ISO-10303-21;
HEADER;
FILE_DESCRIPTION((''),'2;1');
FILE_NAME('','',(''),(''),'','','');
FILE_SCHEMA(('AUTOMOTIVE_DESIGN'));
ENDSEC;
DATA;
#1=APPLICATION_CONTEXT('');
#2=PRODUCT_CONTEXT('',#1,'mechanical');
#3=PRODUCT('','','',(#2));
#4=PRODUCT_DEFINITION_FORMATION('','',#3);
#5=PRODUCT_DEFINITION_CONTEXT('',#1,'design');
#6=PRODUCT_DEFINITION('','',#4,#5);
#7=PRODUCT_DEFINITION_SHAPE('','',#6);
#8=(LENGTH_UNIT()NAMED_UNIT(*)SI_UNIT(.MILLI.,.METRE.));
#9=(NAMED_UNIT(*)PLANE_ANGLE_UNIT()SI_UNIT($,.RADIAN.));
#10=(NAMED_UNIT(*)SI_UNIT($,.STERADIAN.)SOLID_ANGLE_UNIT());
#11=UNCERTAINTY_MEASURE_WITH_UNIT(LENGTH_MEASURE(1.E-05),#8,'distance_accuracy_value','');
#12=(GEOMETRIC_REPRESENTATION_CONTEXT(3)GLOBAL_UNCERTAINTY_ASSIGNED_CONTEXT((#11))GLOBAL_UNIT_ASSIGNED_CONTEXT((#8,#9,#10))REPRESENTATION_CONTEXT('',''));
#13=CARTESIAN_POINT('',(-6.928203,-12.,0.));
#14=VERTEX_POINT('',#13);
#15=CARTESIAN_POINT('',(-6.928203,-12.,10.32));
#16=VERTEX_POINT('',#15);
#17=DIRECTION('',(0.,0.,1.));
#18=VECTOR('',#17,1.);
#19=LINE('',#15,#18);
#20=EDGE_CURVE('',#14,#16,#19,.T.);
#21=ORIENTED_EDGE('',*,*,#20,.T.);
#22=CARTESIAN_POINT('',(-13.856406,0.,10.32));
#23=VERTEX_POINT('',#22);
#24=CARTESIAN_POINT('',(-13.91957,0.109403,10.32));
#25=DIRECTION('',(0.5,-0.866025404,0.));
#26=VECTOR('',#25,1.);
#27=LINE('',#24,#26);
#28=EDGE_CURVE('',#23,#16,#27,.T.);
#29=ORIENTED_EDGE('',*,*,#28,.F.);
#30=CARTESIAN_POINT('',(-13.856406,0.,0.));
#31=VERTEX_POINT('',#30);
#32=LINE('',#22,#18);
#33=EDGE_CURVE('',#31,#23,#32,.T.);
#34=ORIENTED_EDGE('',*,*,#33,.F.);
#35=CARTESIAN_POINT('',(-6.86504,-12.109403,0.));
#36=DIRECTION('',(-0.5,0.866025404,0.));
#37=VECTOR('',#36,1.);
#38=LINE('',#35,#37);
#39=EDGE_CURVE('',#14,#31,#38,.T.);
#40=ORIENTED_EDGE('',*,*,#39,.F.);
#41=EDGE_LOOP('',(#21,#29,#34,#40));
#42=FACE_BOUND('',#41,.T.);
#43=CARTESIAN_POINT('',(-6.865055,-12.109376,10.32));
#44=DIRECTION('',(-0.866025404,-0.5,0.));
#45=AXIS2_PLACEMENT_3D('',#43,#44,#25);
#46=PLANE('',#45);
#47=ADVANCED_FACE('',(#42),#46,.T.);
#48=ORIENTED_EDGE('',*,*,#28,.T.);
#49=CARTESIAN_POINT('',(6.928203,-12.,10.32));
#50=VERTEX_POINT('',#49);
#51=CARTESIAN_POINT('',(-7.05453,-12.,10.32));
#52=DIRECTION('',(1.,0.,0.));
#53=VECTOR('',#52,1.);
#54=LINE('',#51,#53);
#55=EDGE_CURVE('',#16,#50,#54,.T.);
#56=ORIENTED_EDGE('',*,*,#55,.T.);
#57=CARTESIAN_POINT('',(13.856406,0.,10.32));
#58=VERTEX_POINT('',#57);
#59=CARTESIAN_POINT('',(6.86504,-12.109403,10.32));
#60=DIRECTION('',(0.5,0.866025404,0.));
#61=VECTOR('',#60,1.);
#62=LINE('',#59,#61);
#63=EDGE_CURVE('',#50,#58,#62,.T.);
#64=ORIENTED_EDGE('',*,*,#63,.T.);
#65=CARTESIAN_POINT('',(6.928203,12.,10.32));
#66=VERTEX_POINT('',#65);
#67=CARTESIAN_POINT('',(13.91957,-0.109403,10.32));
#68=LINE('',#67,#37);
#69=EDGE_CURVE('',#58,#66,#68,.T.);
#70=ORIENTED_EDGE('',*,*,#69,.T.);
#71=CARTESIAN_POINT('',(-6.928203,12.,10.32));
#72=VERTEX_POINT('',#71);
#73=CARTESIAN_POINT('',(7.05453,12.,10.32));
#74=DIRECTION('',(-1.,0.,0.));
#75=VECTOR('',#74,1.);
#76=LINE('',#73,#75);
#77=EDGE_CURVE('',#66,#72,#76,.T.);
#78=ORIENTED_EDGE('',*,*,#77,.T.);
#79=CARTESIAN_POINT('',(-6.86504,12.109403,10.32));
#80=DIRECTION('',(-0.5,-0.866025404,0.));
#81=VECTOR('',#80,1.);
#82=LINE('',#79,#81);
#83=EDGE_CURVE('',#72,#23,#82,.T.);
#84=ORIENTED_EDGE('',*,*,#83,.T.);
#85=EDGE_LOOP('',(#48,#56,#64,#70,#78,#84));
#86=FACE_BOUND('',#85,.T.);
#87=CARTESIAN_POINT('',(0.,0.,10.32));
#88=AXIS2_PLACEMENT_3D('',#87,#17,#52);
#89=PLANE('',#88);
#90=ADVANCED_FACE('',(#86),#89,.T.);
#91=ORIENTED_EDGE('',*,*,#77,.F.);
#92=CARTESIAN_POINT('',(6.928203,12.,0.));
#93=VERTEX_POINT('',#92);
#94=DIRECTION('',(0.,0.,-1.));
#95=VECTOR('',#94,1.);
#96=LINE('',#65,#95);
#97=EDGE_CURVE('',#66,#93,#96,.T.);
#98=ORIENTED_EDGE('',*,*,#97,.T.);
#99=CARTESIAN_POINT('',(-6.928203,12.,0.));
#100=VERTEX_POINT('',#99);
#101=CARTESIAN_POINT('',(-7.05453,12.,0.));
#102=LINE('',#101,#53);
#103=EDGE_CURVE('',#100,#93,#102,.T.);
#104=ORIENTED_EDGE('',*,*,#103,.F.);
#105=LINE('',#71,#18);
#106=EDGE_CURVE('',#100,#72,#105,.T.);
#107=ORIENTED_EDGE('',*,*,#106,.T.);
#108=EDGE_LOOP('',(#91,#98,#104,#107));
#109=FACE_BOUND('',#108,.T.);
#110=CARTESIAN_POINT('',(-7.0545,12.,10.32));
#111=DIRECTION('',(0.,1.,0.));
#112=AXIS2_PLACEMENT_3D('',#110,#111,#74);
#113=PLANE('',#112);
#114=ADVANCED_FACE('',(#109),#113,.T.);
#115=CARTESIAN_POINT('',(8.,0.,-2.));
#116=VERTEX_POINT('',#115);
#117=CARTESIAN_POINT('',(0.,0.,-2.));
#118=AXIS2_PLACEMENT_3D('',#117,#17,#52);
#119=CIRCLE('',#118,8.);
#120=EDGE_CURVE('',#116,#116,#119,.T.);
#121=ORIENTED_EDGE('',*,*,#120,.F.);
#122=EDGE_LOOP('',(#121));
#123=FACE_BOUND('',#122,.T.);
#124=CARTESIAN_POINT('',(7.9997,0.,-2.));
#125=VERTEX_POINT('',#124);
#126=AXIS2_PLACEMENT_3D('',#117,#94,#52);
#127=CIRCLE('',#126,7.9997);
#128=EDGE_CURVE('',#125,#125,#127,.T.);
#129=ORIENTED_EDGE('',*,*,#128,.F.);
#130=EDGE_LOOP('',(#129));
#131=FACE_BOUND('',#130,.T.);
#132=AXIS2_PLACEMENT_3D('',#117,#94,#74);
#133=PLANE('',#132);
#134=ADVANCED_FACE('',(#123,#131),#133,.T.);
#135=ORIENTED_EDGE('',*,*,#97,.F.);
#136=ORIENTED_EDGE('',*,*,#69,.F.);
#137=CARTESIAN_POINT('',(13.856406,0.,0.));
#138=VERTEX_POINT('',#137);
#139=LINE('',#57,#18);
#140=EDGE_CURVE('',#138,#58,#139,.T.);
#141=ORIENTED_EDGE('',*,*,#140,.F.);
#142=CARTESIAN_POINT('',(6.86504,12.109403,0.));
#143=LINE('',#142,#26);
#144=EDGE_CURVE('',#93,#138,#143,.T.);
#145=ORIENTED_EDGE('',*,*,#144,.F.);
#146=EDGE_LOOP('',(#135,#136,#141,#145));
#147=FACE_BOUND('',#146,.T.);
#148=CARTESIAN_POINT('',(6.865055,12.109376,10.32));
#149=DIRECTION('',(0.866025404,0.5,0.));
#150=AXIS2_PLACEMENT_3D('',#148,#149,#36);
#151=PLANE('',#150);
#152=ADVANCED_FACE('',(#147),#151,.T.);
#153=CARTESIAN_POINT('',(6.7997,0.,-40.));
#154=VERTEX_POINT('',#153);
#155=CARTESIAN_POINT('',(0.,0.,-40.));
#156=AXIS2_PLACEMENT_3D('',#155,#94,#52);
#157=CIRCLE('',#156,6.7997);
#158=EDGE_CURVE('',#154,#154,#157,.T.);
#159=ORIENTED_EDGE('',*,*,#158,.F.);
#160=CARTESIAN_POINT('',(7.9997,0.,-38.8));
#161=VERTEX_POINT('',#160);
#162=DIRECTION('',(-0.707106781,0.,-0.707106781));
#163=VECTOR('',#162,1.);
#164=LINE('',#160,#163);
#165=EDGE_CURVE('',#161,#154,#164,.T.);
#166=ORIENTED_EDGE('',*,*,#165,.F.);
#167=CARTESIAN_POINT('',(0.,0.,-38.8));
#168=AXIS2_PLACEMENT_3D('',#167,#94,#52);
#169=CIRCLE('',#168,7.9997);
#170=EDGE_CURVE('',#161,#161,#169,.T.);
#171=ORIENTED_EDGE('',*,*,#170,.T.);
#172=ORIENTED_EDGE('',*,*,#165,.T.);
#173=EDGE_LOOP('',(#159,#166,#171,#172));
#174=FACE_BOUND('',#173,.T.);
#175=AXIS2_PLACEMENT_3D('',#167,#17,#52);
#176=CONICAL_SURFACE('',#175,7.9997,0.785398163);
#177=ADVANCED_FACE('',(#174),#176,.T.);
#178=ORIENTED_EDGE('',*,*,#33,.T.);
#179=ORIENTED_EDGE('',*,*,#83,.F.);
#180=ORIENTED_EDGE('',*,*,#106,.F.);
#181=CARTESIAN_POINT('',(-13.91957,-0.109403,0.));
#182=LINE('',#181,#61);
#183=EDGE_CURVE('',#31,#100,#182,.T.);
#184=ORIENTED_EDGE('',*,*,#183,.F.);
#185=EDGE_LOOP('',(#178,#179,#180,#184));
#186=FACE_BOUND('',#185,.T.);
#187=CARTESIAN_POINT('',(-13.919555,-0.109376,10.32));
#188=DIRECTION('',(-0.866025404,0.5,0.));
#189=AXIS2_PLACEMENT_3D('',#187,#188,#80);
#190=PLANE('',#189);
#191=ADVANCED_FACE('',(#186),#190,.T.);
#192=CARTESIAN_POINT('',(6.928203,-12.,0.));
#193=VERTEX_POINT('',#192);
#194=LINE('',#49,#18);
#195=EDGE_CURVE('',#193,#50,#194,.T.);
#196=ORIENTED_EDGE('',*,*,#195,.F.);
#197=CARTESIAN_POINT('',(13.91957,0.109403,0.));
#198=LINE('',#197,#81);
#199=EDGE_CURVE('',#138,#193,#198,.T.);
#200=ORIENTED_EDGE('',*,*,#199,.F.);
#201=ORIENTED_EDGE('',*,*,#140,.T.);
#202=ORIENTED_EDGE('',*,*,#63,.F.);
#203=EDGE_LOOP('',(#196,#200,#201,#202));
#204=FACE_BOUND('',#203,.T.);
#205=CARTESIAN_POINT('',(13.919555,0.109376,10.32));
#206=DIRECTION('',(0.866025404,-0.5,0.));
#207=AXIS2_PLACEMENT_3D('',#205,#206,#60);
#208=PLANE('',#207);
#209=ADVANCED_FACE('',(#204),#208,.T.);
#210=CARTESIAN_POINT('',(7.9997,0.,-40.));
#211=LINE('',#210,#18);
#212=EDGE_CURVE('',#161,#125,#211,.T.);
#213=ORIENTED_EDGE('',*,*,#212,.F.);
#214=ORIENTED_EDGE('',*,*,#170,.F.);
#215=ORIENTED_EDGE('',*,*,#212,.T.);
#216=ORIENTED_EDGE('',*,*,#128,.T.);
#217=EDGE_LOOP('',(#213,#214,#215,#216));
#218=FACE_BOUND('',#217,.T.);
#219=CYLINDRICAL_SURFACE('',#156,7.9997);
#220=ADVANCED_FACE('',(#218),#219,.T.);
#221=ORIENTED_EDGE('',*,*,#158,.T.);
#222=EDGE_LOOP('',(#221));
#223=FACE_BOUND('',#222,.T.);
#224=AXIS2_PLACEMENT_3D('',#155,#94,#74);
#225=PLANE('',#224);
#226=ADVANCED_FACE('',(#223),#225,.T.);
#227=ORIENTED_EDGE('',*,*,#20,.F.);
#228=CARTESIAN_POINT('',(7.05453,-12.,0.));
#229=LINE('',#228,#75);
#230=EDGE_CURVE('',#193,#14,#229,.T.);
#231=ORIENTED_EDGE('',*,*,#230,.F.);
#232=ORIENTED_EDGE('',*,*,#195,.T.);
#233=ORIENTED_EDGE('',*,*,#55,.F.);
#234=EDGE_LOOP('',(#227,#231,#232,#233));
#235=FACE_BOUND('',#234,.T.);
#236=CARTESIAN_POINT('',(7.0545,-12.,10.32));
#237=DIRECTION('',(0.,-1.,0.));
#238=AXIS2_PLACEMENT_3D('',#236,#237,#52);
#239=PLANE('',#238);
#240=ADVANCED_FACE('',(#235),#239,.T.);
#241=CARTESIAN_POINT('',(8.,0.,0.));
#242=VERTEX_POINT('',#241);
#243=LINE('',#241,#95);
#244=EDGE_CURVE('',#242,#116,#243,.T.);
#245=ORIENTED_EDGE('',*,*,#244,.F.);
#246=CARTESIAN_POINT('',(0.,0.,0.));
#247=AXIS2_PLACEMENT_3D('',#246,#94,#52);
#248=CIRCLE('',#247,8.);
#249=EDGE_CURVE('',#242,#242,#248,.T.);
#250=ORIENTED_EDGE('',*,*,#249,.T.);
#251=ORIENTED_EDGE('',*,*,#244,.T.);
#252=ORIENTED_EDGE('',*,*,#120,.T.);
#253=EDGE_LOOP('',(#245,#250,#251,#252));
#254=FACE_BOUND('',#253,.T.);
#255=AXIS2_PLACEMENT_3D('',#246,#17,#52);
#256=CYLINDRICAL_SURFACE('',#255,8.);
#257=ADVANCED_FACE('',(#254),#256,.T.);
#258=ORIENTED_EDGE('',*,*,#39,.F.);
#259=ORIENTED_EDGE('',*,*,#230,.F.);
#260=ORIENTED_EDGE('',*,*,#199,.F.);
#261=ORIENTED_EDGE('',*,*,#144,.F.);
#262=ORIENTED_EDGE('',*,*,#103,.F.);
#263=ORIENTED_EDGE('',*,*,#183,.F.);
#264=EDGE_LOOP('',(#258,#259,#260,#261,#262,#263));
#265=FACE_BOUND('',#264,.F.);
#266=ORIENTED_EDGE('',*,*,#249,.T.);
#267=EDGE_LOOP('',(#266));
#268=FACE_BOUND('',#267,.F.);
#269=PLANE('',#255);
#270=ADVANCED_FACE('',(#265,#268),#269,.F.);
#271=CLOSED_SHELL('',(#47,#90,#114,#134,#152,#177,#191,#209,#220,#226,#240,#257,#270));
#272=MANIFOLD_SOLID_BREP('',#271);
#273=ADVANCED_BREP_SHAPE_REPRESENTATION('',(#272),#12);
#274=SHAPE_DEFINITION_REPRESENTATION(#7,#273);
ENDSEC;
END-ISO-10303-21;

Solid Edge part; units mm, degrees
sketch "Sketch1" plane through (0, 0, 0) normal (0, 0, 1) x (1, 0, 0)
  circle A0 centre (0, 0) radius 13.92
  dimension "D1" = 27.84
extrude "Protrusion1" add sketch "Sketch1" along normal blind 10.32
sketch "Sketch2" plane through (0, 0, 0) normal (0, 0, -1) x (1, 0, 0)
  circle A0 centre (0, 0) radius 8
extrude "Protrusion2" add sketch "Sketch2" along normal blind 40
sketch "Sketch3" plane through (0, 0, -40) normal (0, 0, -1) x (1, 0, 0)
  circle A0 centre (0, 0) radius 7.9997
extrude "Cutout1" cut sketch "Sketch3" against normal blind 38 flip side to cut
chamfer "Chamfer_1" distance 1.2 angle 45 1 edges at (-7.9997, 0, -40)
sketch "Sketch4" plane through (0, 0, 10.32) normal (0, 0, 1) x (1, 0, 0)
  line L0 (-7.0545, 12) -> (7.0545, 12)
  dimension "D1" = 24
extrude "Cutout2" cut sketch "Sketch4" against normal up to next material side at (0, 12.05, 10.32)
pattern_circular "Pattern1" count 6 over 360 about axis through (0, 0, 10.32) along (0, 0, 1) of "Cutout2"
properties part number "24104867"
